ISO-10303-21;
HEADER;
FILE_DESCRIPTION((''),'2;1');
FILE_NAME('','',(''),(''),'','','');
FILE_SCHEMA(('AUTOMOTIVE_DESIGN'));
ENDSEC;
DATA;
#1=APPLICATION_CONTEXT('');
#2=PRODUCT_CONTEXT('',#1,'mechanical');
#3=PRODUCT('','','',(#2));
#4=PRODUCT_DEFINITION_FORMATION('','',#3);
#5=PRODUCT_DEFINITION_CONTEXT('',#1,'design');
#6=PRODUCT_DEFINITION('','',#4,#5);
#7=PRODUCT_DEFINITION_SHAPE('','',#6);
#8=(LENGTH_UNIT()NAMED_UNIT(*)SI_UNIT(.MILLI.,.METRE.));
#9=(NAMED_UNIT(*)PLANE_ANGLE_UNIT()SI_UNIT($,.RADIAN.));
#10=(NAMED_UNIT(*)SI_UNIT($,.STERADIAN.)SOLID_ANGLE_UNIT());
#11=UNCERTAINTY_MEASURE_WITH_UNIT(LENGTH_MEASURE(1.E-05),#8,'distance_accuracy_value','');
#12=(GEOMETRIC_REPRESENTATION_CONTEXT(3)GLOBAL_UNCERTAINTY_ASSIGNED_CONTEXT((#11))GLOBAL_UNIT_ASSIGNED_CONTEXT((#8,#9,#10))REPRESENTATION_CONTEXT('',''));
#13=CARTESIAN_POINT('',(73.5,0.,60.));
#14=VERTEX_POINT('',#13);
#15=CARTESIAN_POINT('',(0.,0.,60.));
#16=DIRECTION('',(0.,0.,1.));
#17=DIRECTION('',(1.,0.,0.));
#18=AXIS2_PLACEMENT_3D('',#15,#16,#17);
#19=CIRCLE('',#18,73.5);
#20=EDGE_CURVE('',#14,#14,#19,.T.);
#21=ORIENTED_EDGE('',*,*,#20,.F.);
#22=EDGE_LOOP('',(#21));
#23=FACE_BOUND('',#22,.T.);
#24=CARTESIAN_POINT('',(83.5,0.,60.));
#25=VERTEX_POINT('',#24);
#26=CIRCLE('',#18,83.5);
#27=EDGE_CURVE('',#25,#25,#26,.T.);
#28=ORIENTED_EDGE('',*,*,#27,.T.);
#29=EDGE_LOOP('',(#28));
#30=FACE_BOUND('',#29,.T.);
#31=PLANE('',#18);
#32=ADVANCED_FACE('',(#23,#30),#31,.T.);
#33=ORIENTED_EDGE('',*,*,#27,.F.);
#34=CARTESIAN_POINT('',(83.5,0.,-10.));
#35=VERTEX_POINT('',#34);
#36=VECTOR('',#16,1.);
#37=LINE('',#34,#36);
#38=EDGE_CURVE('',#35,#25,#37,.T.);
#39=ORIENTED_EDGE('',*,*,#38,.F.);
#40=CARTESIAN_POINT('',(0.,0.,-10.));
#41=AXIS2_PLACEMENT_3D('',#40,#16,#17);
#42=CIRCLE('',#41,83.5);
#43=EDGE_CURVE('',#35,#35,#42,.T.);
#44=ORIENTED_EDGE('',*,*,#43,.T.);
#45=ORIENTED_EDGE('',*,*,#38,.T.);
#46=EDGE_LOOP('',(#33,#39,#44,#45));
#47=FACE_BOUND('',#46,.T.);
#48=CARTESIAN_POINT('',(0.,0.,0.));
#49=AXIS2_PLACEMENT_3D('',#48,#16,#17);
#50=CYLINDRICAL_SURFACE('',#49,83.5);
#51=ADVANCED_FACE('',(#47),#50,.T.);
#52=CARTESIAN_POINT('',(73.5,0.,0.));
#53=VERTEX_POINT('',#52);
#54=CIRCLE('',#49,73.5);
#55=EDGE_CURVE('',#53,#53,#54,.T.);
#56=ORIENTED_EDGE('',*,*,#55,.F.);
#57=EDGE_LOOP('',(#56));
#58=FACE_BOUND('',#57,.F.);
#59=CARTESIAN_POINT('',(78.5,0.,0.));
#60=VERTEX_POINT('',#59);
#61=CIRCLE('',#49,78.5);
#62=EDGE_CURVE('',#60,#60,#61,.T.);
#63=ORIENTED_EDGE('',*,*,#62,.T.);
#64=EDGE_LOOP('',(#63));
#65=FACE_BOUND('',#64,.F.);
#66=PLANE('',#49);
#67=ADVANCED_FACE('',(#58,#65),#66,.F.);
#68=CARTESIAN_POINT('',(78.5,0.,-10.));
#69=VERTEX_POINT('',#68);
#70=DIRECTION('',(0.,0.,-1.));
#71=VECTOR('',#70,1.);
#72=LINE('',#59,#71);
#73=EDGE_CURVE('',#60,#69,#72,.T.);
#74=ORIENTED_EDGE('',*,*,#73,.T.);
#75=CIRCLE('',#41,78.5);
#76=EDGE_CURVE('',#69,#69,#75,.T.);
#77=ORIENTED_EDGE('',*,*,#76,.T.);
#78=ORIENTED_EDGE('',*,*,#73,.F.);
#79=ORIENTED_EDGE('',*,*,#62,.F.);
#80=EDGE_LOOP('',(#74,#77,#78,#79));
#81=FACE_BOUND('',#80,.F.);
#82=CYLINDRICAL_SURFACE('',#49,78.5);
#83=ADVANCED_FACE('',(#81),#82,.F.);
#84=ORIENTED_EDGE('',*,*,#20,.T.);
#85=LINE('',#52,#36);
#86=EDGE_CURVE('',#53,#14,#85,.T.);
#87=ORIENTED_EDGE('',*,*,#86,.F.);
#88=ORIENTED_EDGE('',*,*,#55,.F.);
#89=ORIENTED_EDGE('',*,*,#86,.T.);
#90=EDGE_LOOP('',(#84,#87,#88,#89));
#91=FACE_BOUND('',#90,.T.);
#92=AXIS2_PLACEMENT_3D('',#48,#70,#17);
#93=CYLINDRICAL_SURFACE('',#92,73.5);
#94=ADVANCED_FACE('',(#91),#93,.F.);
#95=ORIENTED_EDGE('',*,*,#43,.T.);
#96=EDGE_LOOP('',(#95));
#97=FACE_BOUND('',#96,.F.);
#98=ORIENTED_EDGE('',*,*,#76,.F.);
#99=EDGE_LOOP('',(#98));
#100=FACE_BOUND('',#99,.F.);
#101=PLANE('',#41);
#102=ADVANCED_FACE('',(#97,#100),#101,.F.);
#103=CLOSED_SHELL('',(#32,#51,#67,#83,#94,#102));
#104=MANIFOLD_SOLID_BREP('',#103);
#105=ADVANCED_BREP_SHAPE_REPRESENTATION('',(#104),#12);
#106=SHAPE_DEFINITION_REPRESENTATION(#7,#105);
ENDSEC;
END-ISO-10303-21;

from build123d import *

# Parameters (mm, degrees)
F0_R     = 83.5
F0_R_2   = 78.5
F0_R_3   = 73.5
F1_DEPTH = 60
F2_DEPTH = 10


# Not quite as in the source:
# - a feature of the source that left no trace in its solid (it failed there, or was rolled back) is left out


with BuildPart() as f1:
    # F0 (on Top) → F1 (new body)
    with BuildSketch(Plane.XY):
        Circle(F0_R)
        Circle(F0_R_2, mode=Mode.SUBTRACT)
        Circle(F0_R_2)
        Circle(F0_R_3, mode=Mode.SUBTRACT)
    extrude(amount=F1_DEPTH)

    # F0 (on Top) → F2 (join)
    with BuildSketch(Plane.XY):
        Circle(F0_R)
        Circle(F0_R_2, mode=Mode.SUBTRACT)
    extrude(amount=-F2_DEPTH)


solid = f1.part
